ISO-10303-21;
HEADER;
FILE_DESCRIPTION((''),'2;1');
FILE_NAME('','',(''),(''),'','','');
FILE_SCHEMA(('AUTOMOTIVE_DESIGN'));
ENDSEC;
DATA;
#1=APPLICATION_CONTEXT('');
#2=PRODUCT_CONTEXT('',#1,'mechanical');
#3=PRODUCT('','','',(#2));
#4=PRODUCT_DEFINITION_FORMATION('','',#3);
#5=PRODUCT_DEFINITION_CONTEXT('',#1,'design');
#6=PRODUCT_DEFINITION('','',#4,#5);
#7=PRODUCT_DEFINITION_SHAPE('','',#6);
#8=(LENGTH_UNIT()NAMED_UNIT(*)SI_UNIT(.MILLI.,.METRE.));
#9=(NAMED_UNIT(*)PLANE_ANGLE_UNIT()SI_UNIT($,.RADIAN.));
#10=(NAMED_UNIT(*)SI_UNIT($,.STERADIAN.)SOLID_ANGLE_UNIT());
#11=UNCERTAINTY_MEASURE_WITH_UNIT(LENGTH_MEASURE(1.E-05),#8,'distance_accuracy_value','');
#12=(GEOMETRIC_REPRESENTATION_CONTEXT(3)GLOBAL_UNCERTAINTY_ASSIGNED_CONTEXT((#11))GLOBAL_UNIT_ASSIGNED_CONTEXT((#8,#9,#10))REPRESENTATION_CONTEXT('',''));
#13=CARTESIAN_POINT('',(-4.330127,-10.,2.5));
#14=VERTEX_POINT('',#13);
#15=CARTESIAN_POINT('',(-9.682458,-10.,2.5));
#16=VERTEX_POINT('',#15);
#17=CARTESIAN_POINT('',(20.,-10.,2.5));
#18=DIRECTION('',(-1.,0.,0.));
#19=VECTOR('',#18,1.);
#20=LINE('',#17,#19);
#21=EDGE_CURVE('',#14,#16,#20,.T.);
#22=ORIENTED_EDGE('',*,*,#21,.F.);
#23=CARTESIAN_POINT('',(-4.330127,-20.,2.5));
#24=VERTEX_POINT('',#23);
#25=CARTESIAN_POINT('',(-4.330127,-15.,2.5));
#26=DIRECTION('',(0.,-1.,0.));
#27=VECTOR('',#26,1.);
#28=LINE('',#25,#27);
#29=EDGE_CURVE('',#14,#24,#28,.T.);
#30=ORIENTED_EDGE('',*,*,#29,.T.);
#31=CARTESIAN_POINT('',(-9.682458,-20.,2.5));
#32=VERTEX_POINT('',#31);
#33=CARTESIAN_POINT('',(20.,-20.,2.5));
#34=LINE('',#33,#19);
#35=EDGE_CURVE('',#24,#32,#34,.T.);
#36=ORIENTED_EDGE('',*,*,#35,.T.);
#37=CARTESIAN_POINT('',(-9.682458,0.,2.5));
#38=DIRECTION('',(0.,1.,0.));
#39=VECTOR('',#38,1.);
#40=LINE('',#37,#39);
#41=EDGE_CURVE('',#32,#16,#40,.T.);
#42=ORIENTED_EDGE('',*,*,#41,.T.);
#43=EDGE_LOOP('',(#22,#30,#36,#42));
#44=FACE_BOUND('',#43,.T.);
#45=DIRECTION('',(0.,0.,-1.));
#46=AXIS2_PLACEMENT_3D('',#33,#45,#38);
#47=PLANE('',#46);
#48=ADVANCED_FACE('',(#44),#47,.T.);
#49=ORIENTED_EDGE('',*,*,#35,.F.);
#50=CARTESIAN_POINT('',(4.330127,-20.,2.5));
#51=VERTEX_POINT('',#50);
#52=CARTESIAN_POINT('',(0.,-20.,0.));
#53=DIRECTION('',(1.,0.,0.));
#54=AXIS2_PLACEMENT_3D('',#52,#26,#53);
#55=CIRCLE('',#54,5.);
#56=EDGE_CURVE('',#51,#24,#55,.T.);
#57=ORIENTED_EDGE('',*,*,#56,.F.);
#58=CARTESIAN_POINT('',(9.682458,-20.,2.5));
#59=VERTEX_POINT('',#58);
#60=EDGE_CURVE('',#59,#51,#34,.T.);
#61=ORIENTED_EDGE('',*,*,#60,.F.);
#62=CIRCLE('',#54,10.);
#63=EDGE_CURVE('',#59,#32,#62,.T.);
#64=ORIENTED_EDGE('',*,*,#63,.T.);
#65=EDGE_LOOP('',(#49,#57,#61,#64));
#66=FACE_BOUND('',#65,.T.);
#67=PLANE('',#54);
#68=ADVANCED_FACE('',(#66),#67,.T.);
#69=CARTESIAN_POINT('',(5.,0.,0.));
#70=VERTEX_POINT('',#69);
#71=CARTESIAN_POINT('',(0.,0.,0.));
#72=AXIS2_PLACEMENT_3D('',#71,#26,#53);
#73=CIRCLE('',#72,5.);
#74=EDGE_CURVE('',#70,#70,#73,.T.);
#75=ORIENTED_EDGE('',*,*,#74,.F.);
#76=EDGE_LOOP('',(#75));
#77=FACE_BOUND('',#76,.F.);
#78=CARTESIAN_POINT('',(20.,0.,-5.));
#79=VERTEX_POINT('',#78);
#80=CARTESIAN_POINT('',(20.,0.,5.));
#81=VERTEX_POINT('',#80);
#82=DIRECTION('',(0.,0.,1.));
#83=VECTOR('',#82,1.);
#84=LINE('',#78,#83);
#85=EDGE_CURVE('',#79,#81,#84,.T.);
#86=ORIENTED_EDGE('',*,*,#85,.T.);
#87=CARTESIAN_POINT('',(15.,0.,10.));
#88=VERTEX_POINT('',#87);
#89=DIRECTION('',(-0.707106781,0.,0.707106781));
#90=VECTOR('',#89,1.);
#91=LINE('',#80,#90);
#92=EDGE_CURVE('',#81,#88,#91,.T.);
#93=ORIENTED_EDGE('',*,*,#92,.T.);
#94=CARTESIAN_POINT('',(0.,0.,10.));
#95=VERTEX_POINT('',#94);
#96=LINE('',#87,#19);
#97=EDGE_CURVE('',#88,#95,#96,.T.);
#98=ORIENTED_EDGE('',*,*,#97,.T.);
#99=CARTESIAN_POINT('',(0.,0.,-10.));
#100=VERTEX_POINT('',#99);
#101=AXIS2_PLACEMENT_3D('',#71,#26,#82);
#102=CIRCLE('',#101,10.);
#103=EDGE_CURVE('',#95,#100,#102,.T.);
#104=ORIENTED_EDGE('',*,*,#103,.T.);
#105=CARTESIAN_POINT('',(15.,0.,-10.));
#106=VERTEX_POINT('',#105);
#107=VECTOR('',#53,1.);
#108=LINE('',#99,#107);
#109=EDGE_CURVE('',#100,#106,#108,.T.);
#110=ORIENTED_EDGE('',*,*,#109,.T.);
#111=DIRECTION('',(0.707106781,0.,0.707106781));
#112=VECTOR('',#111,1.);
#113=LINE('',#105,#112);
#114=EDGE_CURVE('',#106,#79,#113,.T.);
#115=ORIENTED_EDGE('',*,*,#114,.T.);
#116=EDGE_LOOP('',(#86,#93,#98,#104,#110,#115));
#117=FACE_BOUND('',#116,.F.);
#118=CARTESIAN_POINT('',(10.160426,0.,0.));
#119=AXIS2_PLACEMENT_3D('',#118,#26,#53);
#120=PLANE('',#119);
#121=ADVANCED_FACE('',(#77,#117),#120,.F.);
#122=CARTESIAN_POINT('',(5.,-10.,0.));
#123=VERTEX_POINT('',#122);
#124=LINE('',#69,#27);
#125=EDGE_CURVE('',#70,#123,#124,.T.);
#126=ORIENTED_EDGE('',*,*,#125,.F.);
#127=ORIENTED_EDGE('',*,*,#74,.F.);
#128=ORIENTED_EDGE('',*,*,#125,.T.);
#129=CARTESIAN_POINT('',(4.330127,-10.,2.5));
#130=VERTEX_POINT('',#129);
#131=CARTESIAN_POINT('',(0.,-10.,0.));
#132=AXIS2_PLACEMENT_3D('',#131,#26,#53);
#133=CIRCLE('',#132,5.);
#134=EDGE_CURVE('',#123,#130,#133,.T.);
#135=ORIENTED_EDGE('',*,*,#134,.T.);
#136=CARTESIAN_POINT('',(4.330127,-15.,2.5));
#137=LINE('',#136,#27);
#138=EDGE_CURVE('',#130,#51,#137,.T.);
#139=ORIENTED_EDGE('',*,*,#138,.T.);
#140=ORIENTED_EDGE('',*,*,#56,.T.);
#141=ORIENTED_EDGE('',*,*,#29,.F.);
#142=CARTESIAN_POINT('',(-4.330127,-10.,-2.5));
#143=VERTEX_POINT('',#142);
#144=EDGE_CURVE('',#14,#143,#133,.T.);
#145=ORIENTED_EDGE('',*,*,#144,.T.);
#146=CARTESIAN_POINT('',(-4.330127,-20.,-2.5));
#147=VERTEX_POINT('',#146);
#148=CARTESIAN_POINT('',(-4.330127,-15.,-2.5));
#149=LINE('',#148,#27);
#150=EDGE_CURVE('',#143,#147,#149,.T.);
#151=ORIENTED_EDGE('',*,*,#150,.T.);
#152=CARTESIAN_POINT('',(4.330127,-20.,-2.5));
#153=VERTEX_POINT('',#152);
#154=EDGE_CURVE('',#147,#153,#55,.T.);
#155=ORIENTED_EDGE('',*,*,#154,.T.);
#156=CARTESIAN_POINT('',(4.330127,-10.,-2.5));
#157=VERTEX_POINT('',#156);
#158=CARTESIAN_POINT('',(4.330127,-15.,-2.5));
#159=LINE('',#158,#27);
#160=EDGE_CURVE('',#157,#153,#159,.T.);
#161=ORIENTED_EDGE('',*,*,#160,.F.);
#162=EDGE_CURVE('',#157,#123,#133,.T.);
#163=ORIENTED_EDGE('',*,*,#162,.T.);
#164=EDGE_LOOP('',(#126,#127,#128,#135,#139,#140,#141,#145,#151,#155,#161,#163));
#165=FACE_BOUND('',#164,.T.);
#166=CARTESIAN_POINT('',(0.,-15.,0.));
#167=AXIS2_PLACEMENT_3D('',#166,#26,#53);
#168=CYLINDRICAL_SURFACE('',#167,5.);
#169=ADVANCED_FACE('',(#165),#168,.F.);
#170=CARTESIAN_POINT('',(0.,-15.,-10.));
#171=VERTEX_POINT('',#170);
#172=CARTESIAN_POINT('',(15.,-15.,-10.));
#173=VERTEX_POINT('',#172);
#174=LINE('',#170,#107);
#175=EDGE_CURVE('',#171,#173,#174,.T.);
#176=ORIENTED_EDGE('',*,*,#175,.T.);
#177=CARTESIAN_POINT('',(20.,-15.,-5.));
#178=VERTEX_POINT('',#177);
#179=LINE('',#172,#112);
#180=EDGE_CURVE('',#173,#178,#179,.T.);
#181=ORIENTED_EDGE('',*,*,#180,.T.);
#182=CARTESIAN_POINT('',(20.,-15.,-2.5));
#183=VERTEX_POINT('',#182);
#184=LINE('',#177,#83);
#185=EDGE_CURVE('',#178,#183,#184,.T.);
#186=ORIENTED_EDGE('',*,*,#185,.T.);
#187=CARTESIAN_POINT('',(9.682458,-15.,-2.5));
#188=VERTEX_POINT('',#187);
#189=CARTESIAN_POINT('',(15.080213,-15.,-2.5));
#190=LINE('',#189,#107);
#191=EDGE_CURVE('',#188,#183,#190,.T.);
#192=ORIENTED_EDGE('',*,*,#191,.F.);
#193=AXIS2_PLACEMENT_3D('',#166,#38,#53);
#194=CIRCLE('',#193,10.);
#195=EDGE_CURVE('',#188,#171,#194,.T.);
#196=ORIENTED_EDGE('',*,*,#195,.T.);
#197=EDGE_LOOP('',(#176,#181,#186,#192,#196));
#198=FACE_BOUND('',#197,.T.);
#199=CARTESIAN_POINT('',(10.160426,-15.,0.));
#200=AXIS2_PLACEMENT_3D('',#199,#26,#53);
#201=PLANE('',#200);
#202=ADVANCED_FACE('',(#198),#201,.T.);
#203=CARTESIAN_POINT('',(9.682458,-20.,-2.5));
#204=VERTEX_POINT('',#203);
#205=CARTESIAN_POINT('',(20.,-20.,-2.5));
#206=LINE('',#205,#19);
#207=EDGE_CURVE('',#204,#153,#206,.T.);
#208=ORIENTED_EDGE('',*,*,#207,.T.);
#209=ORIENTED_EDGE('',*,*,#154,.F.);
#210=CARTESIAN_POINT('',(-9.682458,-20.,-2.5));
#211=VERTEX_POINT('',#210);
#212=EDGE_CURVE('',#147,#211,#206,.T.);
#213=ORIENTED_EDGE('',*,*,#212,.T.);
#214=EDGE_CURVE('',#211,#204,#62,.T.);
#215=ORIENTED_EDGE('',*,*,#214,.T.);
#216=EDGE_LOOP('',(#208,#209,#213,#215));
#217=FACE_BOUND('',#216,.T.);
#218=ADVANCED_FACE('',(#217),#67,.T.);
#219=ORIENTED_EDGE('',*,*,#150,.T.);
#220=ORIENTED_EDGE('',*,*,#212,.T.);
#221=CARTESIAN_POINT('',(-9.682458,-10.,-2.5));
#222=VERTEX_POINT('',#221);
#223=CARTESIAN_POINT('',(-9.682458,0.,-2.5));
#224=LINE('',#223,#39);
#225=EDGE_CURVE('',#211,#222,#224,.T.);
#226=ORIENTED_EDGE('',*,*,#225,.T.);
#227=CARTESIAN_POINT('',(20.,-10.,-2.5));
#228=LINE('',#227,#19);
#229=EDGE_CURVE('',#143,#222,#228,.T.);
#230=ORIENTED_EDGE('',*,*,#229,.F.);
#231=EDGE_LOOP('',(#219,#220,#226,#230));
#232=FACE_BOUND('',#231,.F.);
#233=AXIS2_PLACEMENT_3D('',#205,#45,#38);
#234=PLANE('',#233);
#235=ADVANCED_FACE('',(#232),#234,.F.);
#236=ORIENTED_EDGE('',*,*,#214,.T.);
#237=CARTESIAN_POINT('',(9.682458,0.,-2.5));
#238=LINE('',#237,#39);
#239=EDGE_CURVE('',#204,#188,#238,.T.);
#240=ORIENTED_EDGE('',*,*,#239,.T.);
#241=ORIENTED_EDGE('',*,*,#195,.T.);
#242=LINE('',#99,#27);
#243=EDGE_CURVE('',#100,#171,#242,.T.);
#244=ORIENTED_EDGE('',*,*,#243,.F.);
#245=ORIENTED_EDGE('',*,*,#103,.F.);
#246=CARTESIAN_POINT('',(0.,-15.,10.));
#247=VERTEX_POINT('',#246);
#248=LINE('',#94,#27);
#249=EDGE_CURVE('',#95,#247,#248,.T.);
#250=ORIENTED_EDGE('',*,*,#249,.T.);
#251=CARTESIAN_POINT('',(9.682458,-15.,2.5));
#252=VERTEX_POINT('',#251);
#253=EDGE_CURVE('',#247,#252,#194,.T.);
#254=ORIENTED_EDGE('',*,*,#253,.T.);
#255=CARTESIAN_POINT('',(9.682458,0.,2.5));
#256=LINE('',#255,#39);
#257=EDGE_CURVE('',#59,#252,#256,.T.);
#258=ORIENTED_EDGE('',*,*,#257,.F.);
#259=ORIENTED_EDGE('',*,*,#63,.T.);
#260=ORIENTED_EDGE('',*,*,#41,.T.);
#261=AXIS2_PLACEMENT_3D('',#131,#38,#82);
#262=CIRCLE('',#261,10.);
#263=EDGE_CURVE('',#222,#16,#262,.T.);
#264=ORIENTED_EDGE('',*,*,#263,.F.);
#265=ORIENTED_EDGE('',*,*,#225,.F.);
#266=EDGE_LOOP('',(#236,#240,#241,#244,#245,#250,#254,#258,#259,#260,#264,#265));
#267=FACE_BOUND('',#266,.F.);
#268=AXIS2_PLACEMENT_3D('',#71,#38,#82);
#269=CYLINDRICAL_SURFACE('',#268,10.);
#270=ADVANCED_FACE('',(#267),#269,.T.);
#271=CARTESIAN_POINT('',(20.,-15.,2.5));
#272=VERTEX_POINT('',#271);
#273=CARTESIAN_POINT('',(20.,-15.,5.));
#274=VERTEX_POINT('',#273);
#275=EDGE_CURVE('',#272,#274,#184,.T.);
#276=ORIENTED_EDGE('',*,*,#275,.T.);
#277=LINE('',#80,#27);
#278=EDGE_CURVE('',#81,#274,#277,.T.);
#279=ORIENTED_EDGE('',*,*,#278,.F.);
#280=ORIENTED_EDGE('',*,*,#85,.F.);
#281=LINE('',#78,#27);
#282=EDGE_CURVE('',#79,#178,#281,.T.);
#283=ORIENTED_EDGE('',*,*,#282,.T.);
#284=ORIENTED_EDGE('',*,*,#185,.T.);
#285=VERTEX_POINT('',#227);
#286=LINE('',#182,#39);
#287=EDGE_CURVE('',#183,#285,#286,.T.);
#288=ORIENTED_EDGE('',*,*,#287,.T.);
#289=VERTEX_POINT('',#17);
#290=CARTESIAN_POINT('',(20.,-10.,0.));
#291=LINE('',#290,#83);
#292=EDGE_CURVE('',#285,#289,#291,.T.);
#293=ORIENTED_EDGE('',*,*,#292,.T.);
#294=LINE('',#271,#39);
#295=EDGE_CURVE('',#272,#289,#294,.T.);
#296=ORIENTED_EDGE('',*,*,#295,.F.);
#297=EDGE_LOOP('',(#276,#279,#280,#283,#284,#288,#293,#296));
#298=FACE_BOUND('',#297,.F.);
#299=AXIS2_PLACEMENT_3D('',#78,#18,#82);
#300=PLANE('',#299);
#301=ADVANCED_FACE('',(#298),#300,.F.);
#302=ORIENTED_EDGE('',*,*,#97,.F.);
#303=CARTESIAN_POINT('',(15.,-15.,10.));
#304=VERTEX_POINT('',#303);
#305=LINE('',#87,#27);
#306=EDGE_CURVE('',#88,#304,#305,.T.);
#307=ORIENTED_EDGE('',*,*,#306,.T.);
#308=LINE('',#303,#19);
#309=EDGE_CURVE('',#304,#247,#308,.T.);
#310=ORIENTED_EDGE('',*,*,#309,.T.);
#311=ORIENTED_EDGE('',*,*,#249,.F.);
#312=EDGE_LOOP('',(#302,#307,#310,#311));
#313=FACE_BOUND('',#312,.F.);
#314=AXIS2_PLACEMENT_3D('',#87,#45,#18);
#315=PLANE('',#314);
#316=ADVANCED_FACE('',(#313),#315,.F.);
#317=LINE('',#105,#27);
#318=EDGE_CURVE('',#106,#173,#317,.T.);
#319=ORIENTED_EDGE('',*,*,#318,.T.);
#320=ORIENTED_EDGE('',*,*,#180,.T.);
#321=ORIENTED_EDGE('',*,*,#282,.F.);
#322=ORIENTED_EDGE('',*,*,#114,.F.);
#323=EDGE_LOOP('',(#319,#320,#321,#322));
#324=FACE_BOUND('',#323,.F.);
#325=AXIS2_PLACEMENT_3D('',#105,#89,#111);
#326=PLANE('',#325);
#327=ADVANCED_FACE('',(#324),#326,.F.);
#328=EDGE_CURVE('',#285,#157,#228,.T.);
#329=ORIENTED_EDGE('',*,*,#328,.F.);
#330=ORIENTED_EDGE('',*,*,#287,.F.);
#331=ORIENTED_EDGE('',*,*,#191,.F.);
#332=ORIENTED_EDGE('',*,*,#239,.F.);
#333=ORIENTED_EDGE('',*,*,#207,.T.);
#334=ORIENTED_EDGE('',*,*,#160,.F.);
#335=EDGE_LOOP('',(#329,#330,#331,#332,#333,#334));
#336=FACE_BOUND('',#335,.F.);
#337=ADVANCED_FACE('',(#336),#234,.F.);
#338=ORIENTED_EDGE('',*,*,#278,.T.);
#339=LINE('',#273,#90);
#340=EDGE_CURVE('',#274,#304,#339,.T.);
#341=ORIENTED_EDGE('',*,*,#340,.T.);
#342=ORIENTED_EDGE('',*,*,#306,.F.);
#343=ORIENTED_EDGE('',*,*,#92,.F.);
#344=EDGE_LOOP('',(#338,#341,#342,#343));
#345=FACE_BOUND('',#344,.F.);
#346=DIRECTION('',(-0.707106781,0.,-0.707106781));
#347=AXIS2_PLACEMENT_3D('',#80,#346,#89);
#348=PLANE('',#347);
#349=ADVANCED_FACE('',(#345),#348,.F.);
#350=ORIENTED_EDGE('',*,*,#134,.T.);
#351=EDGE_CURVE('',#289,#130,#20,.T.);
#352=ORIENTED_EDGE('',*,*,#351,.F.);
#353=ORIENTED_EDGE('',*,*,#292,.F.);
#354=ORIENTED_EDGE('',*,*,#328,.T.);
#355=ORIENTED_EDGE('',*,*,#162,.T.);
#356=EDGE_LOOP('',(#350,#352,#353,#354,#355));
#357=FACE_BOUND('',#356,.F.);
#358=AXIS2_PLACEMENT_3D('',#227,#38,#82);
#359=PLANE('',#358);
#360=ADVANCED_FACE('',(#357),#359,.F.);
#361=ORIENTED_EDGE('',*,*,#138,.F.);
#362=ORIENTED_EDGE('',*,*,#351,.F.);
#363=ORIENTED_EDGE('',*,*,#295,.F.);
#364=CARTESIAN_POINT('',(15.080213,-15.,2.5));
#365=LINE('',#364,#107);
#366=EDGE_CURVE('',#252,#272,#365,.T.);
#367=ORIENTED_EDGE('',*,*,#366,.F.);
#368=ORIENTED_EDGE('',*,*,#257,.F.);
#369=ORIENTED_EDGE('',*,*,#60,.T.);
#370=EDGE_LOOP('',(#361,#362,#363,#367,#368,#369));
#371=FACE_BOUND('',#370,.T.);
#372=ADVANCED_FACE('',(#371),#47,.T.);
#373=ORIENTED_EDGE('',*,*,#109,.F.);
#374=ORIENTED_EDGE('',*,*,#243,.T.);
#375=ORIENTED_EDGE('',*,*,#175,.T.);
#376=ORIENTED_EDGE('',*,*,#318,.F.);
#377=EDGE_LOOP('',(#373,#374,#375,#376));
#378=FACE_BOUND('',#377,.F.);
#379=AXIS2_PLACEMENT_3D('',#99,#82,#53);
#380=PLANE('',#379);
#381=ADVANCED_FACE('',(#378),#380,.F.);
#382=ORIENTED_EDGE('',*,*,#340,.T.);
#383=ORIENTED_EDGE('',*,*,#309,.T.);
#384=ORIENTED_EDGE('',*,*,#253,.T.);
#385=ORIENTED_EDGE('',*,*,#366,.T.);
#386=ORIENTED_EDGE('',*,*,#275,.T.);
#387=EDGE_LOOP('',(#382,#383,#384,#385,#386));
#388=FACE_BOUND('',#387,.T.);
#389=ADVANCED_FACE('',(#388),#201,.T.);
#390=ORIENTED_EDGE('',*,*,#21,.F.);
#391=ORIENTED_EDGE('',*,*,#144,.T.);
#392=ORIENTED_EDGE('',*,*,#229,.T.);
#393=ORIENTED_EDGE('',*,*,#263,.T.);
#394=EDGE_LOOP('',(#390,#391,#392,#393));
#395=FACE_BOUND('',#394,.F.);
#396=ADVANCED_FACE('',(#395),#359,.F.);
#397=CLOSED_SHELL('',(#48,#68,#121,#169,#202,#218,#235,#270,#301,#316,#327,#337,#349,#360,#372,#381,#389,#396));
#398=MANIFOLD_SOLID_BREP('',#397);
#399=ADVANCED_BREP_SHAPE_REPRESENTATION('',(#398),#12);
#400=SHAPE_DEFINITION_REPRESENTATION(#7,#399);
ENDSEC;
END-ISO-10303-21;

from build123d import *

# Parameters (mm, degrees)
F0_R     = 10
F0_R_2   = 5
F1_DEPTH = 20
F3_DEPTH = 15
F4_DEPTH = 15.001
F5_W     = 10
F5_H     = 5
F6_DEPTH = 30.001


with BuildPart() as f1:
    # F0 (on Front) → F1 (new body)
    with BuildSketch(Plane.XZ):
        Circle(F0_R)
        Circle(F0_R_2, mode=Mode.SUBTRACT)
    extrude(amount=F1_DEPTH)

    # F2 (on Front) → F3 (join)
    with BuildSketch(Plane.XZ):
        with BuildLine():
            Line((15, 10), (0, 10))
            ThreePointArc((0, 10), (7.0710678119, 7.0710678119), (10, 0))
            ThreePointArc((10, 0), (7.0710678119, -7.0710678119), (0, -10))
            Line((0, -10), (15, -10))
            Line((15, -10), (20, -5))
            Line((20, -5), (20, 5))
            Line((20, 5), (15, 10))
        make_face()
        with BuildLine():
            ThreePointArc((10, 0), (7.0710678119, 7.0710678119), (0, 10))
            ThreePointArc((0, 10), (-10, 0), (0, -10))
            ThreePointArc((0, -10), (7.0710678119, -7.0710678119), (10, 0))
        make_face()
    extrude(amount=F3_DEPTH)

    # F4 (cut, through all): a face of the model
    f4_faces = [f1.faces().sort_by_distance(p)[0] for p in [
        (0, -15, 0),
    ]]
    extrude(f4_faces, amount=-F4_DEPTH, mode=Mode.SUBTRACT)

    # F5 (on face) → F6 (cut, through all)
    with BuildSketch(Plane.YZ.offset(20)):
        with Locations((-15, 0)):
            Rectangle(F5_W, F5_H)
    extrude(amount=-F6_DEPTH, mode=Mode.SUBTRACT)


solid = f1.part
